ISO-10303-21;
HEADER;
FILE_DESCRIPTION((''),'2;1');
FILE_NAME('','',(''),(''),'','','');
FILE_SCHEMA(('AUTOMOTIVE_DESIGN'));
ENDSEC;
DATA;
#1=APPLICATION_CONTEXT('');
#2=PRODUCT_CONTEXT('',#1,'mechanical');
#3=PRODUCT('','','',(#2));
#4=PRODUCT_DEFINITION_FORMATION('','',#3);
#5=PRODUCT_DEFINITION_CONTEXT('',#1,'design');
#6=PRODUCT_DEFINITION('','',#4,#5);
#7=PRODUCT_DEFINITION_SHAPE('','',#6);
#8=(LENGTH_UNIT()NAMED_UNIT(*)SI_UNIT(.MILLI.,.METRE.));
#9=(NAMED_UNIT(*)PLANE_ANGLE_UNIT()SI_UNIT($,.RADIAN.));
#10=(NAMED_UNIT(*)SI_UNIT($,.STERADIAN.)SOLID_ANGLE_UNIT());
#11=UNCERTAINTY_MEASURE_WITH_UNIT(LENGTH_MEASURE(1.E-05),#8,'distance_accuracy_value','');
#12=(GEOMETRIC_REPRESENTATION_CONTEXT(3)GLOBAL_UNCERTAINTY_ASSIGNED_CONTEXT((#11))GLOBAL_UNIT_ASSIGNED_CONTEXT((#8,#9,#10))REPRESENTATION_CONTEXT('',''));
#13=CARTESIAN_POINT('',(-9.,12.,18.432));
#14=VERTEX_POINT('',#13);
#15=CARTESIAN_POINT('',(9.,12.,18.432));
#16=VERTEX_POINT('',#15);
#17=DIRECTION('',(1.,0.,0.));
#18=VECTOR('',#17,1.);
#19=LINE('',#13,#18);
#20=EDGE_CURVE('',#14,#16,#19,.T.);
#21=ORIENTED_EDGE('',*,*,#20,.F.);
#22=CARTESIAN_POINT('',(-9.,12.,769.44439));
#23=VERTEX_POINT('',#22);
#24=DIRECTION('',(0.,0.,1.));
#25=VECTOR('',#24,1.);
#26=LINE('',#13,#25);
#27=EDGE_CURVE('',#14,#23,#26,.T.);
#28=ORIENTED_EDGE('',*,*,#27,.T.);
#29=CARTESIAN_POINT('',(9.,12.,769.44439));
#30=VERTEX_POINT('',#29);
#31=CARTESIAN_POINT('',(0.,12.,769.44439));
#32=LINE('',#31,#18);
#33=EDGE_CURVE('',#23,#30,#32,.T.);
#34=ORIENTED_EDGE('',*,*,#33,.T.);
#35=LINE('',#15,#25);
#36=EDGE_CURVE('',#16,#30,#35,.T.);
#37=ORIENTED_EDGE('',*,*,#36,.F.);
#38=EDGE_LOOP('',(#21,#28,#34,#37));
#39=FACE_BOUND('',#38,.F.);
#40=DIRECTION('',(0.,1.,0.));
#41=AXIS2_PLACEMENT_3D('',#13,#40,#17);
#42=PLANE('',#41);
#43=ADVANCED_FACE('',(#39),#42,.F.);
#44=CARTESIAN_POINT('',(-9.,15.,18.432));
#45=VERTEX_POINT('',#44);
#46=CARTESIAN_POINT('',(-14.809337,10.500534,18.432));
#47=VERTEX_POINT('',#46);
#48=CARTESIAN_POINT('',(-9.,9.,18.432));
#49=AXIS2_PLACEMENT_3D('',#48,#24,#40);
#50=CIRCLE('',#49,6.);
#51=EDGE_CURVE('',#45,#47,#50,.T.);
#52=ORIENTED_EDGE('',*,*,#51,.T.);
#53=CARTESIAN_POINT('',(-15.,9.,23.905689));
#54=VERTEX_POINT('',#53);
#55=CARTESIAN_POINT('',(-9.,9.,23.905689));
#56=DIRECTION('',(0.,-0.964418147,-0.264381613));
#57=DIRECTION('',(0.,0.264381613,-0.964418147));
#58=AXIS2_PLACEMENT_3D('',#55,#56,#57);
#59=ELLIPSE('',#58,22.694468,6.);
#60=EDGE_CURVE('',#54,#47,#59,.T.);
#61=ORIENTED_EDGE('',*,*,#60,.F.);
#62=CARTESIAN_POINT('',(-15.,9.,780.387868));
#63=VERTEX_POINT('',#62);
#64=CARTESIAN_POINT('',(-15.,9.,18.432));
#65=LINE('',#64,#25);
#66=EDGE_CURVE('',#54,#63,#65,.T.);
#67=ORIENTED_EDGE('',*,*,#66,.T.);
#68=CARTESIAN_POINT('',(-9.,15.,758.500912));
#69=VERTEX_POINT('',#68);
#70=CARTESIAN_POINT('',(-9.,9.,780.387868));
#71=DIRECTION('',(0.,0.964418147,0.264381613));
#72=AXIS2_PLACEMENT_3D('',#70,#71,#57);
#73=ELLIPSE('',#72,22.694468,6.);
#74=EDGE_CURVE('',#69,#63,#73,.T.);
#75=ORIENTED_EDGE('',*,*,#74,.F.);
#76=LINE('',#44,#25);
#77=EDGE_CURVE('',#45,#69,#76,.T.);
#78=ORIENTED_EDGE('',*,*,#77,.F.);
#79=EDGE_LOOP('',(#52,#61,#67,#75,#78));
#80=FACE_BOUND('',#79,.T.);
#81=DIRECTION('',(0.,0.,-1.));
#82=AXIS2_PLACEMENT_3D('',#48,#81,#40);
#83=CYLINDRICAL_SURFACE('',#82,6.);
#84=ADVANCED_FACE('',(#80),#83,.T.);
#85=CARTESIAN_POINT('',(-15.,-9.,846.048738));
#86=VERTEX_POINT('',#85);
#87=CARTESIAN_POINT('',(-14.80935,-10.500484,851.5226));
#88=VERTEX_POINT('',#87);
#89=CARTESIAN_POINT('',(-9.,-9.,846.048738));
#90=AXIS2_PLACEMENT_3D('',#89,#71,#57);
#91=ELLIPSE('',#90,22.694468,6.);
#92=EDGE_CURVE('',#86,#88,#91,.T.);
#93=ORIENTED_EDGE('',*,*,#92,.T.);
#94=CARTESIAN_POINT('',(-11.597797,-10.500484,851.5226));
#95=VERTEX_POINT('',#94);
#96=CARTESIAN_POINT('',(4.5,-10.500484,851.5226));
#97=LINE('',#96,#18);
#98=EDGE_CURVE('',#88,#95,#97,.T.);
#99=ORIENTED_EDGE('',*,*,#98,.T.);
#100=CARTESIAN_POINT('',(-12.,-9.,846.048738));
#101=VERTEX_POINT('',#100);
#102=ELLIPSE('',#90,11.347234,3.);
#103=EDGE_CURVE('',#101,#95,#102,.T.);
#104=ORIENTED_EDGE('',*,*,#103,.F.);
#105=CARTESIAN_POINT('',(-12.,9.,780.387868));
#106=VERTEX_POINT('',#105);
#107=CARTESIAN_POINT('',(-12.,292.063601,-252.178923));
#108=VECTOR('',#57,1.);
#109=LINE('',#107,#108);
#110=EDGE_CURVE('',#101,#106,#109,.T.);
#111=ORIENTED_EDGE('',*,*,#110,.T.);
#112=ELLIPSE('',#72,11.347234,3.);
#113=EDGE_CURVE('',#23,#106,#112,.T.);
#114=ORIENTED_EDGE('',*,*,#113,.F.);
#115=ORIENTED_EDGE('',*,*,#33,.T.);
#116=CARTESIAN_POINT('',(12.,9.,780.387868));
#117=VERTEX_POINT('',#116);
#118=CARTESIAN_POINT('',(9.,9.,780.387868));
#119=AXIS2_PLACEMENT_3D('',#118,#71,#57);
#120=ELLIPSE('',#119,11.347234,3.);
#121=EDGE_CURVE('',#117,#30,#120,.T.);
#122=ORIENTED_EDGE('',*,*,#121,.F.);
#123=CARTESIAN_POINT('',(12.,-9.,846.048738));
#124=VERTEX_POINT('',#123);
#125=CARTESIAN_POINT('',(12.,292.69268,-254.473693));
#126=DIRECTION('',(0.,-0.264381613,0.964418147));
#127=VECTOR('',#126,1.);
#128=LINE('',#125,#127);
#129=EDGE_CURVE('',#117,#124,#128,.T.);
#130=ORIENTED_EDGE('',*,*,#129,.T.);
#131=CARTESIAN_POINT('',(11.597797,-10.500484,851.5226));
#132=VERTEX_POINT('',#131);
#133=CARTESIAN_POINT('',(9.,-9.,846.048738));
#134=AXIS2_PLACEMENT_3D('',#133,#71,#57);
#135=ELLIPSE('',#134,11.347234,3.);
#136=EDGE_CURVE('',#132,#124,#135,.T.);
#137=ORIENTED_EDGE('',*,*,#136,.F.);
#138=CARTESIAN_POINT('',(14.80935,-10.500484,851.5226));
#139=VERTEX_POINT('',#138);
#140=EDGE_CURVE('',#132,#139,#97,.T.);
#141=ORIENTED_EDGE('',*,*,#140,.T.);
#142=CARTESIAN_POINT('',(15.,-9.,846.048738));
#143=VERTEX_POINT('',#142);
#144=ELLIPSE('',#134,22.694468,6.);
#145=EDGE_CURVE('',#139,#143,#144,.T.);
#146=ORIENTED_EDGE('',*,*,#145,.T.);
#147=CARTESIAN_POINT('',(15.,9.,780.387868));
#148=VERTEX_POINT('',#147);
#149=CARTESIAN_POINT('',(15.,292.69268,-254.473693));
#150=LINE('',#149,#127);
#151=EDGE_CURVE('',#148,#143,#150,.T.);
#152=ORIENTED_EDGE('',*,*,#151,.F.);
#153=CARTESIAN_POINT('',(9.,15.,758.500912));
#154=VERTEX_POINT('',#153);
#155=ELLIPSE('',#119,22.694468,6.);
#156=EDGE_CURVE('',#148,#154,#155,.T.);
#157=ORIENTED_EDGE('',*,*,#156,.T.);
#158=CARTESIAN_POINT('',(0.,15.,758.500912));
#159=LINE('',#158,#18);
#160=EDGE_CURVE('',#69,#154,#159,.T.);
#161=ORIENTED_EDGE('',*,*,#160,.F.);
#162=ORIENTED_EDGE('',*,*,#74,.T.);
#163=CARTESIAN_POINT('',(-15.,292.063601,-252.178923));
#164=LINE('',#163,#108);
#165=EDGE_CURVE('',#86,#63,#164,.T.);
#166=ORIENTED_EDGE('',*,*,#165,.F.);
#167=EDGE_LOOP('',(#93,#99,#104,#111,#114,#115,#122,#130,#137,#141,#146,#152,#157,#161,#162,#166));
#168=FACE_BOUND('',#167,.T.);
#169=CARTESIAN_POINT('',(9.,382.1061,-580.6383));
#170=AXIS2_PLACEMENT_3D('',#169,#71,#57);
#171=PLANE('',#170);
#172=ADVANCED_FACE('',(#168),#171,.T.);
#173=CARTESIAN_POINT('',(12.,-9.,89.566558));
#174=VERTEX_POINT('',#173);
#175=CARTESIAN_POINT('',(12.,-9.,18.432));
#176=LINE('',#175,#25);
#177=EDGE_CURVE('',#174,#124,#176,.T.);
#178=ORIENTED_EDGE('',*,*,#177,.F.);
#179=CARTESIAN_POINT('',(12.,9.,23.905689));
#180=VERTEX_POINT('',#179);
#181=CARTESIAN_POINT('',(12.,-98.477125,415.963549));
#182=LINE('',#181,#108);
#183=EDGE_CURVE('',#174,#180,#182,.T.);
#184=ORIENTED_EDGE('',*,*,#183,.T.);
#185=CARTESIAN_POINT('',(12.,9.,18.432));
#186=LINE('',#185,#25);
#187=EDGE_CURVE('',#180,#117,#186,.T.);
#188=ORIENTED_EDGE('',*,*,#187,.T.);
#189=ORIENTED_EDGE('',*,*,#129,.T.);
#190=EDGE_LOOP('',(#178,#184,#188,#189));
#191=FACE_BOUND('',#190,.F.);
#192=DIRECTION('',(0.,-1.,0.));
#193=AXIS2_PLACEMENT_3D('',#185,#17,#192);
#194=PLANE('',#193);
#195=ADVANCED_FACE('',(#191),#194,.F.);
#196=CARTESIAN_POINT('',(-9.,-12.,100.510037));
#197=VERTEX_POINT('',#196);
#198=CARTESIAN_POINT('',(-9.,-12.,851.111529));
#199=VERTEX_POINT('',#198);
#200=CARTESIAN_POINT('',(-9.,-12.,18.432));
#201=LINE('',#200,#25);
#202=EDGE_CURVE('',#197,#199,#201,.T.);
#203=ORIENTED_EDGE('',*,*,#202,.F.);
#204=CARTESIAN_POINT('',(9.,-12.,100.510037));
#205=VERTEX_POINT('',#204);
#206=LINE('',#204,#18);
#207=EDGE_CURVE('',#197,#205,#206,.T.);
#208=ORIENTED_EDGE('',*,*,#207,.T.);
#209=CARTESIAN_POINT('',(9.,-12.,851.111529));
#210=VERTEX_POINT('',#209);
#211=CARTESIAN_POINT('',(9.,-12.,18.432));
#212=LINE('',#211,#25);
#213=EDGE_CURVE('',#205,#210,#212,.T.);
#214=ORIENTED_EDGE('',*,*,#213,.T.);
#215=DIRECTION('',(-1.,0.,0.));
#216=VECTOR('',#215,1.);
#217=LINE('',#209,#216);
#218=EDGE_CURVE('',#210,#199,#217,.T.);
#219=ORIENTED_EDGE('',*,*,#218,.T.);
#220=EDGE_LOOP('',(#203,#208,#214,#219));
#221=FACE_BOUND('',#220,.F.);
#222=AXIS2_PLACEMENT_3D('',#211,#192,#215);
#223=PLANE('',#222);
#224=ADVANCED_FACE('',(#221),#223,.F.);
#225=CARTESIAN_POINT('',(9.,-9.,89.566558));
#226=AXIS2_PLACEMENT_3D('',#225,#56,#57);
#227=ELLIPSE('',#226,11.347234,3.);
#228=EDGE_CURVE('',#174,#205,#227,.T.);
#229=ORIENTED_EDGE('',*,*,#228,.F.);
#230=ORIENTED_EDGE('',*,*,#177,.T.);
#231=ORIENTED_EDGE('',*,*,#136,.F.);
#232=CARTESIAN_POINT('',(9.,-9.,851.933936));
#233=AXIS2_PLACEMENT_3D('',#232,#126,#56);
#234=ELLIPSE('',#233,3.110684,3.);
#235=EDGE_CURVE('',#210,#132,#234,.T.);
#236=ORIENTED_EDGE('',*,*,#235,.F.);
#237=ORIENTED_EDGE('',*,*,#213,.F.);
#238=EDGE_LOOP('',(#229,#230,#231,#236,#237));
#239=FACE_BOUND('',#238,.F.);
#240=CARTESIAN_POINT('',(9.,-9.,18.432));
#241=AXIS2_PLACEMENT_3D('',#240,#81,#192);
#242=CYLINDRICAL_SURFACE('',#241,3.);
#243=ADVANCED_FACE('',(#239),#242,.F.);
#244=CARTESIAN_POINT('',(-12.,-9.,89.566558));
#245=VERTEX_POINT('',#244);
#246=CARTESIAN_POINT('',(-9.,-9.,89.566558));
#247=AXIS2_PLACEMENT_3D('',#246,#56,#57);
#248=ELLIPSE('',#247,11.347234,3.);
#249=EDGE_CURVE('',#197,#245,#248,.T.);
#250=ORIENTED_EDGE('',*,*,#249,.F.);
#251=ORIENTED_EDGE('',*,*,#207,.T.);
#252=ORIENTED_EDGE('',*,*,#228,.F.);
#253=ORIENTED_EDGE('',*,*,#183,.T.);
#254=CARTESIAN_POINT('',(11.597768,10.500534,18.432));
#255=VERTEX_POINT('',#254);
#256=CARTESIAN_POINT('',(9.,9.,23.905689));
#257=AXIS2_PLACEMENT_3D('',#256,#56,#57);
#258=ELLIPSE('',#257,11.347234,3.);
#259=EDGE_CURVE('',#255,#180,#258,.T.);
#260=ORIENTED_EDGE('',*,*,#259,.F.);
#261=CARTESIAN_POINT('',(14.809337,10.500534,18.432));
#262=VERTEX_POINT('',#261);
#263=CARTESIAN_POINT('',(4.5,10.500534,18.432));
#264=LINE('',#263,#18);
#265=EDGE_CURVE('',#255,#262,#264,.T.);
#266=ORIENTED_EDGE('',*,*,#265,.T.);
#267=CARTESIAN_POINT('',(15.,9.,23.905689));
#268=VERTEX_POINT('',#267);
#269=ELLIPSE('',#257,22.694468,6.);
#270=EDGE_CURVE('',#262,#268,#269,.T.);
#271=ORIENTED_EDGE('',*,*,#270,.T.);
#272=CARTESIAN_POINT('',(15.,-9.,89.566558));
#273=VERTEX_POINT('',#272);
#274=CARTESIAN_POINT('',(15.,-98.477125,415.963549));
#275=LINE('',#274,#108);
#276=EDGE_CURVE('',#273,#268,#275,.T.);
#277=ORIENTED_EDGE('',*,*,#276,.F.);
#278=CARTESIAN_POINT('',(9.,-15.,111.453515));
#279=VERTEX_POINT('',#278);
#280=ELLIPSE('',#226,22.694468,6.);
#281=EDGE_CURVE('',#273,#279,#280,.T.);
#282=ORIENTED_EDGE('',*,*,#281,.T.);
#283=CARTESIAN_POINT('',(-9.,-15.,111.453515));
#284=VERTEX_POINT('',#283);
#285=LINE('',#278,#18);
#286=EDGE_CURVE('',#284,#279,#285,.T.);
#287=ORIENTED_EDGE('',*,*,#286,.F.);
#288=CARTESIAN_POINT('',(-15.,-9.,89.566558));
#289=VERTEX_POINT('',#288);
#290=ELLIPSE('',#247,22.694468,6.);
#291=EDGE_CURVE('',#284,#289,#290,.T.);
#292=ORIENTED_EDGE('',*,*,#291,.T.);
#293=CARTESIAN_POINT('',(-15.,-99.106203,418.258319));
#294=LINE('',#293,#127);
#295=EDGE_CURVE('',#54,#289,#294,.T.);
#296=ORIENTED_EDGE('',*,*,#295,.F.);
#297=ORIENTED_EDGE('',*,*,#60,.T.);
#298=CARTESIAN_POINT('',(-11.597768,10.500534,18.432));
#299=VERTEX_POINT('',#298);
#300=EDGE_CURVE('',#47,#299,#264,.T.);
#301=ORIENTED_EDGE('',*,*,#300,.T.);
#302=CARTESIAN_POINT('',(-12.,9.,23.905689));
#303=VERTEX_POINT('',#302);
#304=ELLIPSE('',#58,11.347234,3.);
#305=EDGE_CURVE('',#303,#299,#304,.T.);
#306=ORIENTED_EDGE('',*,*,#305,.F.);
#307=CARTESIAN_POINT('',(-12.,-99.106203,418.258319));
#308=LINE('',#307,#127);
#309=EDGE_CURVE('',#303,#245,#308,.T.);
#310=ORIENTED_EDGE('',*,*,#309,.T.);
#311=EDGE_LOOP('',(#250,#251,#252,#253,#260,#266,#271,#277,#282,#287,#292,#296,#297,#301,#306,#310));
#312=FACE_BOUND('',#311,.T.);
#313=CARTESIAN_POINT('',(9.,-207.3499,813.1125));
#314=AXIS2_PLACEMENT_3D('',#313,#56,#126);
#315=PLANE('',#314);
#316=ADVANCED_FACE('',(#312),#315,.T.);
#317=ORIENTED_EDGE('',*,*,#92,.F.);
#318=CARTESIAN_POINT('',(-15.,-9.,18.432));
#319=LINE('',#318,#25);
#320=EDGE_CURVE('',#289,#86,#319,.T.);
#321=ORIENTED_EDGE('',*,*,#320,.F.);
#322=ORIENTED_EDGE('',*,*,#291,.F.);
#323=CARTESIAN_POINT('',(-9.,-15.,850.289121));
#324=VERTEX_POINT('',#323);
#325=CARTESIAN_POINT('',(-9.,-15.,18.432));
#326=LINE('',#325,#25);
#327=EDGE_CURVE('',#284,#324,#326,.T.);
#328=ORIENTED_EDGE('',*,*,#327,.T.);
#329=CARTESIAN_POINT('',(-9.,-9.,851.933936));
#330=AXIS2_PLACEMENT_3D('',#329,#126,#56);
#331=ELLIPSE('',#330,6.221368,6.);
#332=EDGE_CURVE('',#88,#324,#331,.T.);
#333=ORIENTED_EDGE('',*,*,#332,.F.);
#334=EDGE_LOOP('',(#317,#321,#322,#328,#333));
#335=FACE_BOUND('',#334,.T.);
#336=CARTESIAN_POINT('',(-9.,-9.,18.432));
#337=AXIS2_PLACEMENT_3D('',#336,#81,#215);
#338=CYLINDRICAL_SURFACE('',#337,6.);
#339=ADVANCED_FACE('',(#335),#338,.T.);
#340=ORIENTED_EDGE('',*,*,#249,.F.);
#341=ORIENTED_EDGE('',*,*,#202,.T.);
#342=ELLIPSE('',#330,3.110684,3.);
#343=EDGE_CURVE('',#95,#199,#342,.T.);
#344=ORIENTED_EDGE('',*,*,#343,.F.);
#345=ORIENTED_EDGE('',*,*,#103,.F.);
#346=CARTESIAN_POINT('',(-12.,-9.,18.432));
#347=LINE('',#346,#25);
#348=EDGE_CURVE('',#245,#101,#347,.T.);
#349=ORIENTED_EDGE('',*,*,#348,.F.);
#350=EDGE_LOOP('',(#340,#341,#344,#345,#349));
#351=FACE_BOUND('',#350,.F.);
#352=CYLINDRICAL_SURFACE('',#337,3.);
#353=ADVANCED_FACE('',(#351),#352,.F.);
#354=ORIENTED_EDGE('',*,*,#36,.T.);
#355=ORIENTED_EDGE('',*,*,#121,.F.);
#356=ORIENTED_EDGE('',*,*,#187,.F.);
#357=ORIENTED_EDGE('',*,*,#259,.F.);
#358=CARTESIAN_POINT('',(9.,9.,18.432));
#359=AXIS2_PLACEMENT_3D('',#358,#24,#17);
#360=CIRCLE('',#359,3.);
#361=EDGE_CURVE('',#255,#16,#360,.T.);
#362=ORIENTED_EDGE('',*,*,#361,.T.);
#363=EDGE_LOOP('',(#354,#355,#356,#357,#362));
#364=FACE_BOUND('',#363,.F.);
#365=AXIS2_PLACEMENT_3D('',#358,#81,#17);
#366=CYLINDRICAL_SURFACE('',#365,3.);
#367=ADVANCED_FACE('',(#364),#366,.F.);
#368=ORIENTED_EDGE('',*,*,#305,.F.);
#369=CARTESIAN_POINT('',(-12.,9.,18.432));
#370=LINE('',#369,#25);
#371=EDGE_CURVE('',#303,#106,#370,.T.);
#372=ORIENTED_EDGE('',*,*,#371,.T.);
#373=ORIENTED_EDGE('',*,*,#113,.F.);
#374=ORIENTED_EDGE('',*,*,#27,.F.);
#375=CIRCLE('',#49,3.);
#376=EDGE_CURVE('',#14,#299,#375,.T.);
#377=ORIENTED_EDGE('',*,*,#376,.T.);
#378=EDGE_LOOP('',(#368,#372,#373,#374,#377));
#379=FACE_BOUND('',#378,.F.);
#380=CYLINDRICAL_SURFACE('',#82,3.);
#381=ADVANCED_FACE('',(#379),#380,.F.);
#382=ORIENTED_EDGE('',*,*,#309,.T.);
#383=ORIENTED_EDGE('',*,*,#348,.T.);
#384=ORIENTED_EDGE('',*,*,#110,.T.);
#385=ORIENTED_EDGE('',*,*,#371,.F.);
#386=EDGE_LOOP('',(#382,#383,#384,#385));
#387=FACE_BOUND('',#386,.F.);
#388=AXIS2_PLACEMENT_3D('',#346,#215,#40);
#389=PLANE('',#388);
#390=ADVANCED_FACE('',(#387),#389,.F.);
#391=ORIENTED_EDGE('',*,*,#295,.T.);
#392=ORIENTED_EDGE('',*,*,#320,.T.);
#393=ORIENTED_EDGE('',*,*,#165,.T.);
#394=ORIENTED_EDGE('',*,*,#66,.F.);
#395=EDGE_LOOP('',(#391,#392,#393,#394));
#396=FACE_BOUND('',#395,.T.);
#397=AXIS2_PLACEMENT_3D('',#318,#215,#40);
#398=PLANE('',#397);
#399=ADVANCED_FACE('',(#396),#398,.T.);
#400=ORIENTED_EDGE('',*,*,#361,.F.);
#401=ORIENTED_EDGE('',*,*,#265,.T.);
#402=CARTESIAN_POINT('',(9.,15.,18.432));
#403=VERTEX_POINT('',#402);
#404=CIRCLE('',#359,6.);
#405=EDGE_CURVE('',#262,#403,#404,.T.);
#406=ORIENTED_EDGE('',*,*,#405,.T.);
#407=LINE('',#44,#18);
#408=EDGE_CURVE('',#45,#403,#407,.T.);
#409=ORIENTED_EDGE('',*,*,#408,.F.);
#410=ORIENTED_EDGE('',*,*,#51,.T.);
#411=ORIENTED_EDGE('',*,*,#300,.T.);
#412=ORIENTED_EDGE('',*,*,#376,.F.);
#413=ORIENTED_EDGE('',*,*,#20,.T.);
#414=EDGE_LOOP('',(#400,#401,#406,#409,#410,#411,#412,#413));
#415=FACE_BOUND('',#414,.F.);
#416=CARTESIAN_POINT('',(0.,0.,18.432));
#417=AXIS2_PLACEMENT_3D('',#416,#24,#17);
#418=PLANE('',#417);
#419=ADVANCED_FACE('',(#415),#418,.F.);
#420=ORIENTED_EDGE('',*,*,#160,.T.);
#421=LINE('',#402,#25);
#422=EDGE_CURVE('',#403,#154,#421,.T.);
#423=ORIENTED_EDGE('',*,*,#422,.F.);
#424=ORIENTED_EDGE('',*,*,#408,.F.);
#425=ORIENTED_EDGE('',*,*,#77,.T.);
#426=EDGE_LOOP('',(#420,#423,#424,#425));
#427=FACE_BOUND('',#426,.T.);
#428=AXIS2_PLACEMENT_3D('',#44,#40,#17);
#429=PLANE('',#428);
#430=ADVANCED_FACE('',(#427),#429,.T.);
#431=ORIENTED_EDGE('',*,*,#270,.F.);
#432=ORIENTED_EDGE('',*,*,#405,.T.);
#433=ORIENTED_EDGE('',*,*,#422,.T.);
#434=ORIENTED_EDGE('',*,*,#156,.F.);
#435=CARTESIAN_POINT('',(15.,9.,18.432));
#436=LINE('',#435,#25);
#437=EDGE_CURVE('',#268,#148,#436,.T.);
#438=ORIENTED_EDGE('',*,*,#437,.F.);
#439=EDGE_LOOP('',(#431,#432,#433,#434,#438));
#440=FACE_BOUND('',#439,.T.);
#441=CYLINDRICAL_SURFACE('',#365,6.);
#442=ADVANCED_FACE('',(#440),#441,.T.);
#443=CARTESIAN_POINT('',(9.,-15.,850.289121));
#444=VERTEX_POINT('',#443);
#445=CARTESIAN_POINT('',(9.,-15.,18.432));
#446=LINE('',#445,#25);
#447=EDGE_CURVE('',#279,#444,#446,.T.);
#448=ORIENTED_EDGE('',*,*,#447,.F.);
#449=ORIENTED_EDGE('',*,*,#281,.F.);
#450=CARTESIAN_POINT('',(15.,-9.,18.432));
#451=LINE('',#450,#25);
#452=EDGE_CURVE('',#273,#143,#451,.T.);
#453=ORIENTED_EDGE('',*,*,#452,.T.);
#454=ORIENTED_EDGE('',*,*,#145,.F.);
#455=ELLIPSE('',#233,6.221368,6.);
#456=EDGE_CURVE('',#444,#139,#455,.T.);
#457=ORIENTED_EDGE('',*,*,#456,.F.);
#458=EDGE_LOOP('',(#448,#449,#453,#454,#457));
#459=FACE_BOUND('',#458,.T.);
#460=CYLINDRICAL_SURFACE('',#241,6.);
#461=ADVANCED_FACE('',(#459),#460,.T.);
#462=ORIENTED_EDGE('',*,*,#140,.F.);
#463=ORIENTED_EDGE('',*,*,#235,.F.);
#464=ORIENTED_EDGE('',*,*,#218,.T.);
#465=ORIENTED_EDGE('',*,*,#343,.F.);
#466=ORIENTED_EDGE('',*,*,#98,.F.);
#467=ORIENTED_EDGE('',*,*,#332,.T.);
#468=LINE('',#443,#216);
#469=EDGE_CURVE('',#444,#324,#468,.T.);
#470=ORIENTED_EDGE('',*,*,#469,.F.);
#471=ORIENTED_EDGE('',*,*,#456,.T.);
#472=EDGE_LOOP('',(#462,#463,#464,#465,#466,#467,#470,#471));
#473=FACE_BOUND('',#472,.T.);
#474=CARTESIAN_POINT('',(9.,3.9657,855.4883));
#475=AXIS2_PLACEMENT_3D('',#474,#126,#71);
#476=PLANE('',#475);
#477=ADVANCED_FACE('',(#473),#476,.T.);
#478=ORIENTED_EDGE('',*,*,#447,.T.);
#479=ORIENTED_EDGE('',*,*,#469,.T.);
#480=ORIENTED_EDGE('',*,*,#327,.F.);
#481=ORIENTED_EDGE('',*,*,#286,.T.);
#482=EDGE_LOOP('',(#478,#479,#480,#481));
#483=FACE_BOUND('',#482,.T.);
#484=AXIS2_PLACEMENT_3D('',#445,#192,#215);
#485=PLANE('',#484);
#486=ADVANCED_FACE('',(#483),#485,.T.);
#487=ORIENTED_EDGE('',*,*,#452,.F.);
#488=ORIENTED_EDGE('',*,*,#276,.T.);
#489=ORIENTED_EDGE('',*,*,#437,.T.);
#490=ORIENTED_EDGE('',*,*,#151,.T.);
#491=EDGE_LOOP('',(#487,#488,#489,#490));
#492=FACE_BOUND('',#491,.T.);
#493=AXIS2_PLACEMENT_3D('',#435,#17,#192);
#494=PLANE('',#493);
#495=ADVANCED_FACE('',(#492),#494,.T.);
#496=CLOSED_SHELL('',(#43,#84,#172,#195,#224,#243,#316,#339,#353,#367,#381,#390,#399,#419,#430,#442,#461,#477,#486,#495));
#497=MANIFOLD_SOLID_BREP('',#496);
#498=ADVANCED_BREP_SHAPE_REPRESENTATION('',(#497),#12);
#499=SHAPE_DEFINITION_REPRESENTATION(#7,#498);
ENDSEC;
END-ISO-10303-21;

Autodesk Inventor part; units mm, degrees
ref_plane "Start Plane" through (0, 0, 18.432) normal (0, 0, 1) x (1, 0, 0)
ref_plane "End Plane" through (0, 0, 851.5226) normal (0, 0, 1) x (1, 0, 0)
sketch "Sketch" plane through (0, 0, 0) normal (0, 0, 1) x (1, 0, 0)
  line L0 (-15, -9) -> (-15, 9)
  line L1 (-9, 15) -> (9, 15)
  line L2 (15, 9) -> (15, -9)
  line L3 (9, -15) -> (-9, -15)
  arc A0 (-15, -9) -> (-9, -15) centre (-9, -9) ccw
  arc A1 (-9, 15) -> (-15, 9) centre (-9, 9) ccw
  arc A2 (15, 9) -> (9, 15) centre (9, 9) ccw
  arc A3 (9, -15) -> (15, -9) centre (9, -9) ccw
  arc A4 (-9, 12) -> (-12, 9) centre (-9, 9) ccw
  line L4 (-9, 12) -> (9, 12)
  arc A5 (12, 9) -> (9, 12) centre (9, 9) ccw
  line L5 (12, 9) -> (12, -9)
  arc A6 (9, -12) -> (12, -9) centre (9, -9) ccw
  line L6 (9, -12) -> (-9, -12)
  arc A7 (-12, -9) -> (-9, -12) centre (-9, -9) ccw
  line L7 (-12, -9) -> (-12, 9)
  line L8 (0, 22.7397) -> (0, -22.7397) construction
  line L9 (-22.7397, 0) -> (22.7397, 0) construction
  dimension "d7" = 6
  dimension "d10" = 30
  dimension "d11" = 30
  dimension "d12" = 3
  dimension "d15" = 15
  dimension "d16" = 15
extrude "Body" add sketch "Sketch" along normal up to surface (833.0906 mm away) from surface at 18.432
sketch "Sketch3" plane through (0, 0, 0) normal (0, 0, 1) x (1, 0, 0)
  line L0 (0, 0) -> (10, 0)
ref_plane "Work Plane3" through (0, 0, 0) normal (0, -1, 0) x (1, 0, 0)
ref_plane "Work Plane4" through (9, -207.3499, 813.1125) normal (0, -0.9644181, -0.2643816) x (1, 0, 0)
split "Split1" plane through (9, -207.3499, 813.1125) removes the side toward (0, -0.9644181, -0.2643816)
ref_plane "Work Plane5" through (9, 3.9657, 855.4883) normal (0, -0.2643816, 0.9644181) x (1, 0, 0)
split "Split2" plane through (9, 3.9657, 855.4883) removes the side toward (0, -0.2643816, 0.9644181)
ref_plane "Work Plane6" through (9, 382.1061, -580.6383) normal (0, 0.9644181, 0.2643816) x (1, 0, 0)
split "Split3" plane through (9, 382.1061, -580.6383) removes the side toward (0, 0.9644181, 0.2643816)
sketch "Sketch4" plane through (0, 0, 0) normal (0, -1, 0) x (1, 0, 0)
  line L0 (-2, 18.432) -> (12, 18.432) projected
  line L1 (-2, 851.5226) -> (12, 851.5226) projected
  dimension "d18" = 833.0906
equation "\"d7\" = G_IR"
equation "\"d10\" = G_H"
equation "\"d11\" = G_W"
equation "\"d12\" = G_T"
equation "\"d15\" = 0.5 * d10"
equation "\"d16\" = 0.5 * d11"
equation "\"d3\" = G_L"
equation "\"G_W\" = 30"
equation "\"G_H\" = 30"
equation "\"G_T\" = 3"
equation "\"G_IR\" = 6"
equation "\"G_L\" = d18"
equation "\"G_OFFSET_START\" = -18.432"
equation "\"G_OFFSET_END\" = -18.432"
equation "\"d13\" = -G_OFFSET_START"
equation "\"d14\" = G_OFFSET_END + B_L"
equation "\"B_L\" = 869.9546"
properties part number "DIN EN 10219-2 - 30 x 30 x 3  - 833.09" material "Steel, Mild"
